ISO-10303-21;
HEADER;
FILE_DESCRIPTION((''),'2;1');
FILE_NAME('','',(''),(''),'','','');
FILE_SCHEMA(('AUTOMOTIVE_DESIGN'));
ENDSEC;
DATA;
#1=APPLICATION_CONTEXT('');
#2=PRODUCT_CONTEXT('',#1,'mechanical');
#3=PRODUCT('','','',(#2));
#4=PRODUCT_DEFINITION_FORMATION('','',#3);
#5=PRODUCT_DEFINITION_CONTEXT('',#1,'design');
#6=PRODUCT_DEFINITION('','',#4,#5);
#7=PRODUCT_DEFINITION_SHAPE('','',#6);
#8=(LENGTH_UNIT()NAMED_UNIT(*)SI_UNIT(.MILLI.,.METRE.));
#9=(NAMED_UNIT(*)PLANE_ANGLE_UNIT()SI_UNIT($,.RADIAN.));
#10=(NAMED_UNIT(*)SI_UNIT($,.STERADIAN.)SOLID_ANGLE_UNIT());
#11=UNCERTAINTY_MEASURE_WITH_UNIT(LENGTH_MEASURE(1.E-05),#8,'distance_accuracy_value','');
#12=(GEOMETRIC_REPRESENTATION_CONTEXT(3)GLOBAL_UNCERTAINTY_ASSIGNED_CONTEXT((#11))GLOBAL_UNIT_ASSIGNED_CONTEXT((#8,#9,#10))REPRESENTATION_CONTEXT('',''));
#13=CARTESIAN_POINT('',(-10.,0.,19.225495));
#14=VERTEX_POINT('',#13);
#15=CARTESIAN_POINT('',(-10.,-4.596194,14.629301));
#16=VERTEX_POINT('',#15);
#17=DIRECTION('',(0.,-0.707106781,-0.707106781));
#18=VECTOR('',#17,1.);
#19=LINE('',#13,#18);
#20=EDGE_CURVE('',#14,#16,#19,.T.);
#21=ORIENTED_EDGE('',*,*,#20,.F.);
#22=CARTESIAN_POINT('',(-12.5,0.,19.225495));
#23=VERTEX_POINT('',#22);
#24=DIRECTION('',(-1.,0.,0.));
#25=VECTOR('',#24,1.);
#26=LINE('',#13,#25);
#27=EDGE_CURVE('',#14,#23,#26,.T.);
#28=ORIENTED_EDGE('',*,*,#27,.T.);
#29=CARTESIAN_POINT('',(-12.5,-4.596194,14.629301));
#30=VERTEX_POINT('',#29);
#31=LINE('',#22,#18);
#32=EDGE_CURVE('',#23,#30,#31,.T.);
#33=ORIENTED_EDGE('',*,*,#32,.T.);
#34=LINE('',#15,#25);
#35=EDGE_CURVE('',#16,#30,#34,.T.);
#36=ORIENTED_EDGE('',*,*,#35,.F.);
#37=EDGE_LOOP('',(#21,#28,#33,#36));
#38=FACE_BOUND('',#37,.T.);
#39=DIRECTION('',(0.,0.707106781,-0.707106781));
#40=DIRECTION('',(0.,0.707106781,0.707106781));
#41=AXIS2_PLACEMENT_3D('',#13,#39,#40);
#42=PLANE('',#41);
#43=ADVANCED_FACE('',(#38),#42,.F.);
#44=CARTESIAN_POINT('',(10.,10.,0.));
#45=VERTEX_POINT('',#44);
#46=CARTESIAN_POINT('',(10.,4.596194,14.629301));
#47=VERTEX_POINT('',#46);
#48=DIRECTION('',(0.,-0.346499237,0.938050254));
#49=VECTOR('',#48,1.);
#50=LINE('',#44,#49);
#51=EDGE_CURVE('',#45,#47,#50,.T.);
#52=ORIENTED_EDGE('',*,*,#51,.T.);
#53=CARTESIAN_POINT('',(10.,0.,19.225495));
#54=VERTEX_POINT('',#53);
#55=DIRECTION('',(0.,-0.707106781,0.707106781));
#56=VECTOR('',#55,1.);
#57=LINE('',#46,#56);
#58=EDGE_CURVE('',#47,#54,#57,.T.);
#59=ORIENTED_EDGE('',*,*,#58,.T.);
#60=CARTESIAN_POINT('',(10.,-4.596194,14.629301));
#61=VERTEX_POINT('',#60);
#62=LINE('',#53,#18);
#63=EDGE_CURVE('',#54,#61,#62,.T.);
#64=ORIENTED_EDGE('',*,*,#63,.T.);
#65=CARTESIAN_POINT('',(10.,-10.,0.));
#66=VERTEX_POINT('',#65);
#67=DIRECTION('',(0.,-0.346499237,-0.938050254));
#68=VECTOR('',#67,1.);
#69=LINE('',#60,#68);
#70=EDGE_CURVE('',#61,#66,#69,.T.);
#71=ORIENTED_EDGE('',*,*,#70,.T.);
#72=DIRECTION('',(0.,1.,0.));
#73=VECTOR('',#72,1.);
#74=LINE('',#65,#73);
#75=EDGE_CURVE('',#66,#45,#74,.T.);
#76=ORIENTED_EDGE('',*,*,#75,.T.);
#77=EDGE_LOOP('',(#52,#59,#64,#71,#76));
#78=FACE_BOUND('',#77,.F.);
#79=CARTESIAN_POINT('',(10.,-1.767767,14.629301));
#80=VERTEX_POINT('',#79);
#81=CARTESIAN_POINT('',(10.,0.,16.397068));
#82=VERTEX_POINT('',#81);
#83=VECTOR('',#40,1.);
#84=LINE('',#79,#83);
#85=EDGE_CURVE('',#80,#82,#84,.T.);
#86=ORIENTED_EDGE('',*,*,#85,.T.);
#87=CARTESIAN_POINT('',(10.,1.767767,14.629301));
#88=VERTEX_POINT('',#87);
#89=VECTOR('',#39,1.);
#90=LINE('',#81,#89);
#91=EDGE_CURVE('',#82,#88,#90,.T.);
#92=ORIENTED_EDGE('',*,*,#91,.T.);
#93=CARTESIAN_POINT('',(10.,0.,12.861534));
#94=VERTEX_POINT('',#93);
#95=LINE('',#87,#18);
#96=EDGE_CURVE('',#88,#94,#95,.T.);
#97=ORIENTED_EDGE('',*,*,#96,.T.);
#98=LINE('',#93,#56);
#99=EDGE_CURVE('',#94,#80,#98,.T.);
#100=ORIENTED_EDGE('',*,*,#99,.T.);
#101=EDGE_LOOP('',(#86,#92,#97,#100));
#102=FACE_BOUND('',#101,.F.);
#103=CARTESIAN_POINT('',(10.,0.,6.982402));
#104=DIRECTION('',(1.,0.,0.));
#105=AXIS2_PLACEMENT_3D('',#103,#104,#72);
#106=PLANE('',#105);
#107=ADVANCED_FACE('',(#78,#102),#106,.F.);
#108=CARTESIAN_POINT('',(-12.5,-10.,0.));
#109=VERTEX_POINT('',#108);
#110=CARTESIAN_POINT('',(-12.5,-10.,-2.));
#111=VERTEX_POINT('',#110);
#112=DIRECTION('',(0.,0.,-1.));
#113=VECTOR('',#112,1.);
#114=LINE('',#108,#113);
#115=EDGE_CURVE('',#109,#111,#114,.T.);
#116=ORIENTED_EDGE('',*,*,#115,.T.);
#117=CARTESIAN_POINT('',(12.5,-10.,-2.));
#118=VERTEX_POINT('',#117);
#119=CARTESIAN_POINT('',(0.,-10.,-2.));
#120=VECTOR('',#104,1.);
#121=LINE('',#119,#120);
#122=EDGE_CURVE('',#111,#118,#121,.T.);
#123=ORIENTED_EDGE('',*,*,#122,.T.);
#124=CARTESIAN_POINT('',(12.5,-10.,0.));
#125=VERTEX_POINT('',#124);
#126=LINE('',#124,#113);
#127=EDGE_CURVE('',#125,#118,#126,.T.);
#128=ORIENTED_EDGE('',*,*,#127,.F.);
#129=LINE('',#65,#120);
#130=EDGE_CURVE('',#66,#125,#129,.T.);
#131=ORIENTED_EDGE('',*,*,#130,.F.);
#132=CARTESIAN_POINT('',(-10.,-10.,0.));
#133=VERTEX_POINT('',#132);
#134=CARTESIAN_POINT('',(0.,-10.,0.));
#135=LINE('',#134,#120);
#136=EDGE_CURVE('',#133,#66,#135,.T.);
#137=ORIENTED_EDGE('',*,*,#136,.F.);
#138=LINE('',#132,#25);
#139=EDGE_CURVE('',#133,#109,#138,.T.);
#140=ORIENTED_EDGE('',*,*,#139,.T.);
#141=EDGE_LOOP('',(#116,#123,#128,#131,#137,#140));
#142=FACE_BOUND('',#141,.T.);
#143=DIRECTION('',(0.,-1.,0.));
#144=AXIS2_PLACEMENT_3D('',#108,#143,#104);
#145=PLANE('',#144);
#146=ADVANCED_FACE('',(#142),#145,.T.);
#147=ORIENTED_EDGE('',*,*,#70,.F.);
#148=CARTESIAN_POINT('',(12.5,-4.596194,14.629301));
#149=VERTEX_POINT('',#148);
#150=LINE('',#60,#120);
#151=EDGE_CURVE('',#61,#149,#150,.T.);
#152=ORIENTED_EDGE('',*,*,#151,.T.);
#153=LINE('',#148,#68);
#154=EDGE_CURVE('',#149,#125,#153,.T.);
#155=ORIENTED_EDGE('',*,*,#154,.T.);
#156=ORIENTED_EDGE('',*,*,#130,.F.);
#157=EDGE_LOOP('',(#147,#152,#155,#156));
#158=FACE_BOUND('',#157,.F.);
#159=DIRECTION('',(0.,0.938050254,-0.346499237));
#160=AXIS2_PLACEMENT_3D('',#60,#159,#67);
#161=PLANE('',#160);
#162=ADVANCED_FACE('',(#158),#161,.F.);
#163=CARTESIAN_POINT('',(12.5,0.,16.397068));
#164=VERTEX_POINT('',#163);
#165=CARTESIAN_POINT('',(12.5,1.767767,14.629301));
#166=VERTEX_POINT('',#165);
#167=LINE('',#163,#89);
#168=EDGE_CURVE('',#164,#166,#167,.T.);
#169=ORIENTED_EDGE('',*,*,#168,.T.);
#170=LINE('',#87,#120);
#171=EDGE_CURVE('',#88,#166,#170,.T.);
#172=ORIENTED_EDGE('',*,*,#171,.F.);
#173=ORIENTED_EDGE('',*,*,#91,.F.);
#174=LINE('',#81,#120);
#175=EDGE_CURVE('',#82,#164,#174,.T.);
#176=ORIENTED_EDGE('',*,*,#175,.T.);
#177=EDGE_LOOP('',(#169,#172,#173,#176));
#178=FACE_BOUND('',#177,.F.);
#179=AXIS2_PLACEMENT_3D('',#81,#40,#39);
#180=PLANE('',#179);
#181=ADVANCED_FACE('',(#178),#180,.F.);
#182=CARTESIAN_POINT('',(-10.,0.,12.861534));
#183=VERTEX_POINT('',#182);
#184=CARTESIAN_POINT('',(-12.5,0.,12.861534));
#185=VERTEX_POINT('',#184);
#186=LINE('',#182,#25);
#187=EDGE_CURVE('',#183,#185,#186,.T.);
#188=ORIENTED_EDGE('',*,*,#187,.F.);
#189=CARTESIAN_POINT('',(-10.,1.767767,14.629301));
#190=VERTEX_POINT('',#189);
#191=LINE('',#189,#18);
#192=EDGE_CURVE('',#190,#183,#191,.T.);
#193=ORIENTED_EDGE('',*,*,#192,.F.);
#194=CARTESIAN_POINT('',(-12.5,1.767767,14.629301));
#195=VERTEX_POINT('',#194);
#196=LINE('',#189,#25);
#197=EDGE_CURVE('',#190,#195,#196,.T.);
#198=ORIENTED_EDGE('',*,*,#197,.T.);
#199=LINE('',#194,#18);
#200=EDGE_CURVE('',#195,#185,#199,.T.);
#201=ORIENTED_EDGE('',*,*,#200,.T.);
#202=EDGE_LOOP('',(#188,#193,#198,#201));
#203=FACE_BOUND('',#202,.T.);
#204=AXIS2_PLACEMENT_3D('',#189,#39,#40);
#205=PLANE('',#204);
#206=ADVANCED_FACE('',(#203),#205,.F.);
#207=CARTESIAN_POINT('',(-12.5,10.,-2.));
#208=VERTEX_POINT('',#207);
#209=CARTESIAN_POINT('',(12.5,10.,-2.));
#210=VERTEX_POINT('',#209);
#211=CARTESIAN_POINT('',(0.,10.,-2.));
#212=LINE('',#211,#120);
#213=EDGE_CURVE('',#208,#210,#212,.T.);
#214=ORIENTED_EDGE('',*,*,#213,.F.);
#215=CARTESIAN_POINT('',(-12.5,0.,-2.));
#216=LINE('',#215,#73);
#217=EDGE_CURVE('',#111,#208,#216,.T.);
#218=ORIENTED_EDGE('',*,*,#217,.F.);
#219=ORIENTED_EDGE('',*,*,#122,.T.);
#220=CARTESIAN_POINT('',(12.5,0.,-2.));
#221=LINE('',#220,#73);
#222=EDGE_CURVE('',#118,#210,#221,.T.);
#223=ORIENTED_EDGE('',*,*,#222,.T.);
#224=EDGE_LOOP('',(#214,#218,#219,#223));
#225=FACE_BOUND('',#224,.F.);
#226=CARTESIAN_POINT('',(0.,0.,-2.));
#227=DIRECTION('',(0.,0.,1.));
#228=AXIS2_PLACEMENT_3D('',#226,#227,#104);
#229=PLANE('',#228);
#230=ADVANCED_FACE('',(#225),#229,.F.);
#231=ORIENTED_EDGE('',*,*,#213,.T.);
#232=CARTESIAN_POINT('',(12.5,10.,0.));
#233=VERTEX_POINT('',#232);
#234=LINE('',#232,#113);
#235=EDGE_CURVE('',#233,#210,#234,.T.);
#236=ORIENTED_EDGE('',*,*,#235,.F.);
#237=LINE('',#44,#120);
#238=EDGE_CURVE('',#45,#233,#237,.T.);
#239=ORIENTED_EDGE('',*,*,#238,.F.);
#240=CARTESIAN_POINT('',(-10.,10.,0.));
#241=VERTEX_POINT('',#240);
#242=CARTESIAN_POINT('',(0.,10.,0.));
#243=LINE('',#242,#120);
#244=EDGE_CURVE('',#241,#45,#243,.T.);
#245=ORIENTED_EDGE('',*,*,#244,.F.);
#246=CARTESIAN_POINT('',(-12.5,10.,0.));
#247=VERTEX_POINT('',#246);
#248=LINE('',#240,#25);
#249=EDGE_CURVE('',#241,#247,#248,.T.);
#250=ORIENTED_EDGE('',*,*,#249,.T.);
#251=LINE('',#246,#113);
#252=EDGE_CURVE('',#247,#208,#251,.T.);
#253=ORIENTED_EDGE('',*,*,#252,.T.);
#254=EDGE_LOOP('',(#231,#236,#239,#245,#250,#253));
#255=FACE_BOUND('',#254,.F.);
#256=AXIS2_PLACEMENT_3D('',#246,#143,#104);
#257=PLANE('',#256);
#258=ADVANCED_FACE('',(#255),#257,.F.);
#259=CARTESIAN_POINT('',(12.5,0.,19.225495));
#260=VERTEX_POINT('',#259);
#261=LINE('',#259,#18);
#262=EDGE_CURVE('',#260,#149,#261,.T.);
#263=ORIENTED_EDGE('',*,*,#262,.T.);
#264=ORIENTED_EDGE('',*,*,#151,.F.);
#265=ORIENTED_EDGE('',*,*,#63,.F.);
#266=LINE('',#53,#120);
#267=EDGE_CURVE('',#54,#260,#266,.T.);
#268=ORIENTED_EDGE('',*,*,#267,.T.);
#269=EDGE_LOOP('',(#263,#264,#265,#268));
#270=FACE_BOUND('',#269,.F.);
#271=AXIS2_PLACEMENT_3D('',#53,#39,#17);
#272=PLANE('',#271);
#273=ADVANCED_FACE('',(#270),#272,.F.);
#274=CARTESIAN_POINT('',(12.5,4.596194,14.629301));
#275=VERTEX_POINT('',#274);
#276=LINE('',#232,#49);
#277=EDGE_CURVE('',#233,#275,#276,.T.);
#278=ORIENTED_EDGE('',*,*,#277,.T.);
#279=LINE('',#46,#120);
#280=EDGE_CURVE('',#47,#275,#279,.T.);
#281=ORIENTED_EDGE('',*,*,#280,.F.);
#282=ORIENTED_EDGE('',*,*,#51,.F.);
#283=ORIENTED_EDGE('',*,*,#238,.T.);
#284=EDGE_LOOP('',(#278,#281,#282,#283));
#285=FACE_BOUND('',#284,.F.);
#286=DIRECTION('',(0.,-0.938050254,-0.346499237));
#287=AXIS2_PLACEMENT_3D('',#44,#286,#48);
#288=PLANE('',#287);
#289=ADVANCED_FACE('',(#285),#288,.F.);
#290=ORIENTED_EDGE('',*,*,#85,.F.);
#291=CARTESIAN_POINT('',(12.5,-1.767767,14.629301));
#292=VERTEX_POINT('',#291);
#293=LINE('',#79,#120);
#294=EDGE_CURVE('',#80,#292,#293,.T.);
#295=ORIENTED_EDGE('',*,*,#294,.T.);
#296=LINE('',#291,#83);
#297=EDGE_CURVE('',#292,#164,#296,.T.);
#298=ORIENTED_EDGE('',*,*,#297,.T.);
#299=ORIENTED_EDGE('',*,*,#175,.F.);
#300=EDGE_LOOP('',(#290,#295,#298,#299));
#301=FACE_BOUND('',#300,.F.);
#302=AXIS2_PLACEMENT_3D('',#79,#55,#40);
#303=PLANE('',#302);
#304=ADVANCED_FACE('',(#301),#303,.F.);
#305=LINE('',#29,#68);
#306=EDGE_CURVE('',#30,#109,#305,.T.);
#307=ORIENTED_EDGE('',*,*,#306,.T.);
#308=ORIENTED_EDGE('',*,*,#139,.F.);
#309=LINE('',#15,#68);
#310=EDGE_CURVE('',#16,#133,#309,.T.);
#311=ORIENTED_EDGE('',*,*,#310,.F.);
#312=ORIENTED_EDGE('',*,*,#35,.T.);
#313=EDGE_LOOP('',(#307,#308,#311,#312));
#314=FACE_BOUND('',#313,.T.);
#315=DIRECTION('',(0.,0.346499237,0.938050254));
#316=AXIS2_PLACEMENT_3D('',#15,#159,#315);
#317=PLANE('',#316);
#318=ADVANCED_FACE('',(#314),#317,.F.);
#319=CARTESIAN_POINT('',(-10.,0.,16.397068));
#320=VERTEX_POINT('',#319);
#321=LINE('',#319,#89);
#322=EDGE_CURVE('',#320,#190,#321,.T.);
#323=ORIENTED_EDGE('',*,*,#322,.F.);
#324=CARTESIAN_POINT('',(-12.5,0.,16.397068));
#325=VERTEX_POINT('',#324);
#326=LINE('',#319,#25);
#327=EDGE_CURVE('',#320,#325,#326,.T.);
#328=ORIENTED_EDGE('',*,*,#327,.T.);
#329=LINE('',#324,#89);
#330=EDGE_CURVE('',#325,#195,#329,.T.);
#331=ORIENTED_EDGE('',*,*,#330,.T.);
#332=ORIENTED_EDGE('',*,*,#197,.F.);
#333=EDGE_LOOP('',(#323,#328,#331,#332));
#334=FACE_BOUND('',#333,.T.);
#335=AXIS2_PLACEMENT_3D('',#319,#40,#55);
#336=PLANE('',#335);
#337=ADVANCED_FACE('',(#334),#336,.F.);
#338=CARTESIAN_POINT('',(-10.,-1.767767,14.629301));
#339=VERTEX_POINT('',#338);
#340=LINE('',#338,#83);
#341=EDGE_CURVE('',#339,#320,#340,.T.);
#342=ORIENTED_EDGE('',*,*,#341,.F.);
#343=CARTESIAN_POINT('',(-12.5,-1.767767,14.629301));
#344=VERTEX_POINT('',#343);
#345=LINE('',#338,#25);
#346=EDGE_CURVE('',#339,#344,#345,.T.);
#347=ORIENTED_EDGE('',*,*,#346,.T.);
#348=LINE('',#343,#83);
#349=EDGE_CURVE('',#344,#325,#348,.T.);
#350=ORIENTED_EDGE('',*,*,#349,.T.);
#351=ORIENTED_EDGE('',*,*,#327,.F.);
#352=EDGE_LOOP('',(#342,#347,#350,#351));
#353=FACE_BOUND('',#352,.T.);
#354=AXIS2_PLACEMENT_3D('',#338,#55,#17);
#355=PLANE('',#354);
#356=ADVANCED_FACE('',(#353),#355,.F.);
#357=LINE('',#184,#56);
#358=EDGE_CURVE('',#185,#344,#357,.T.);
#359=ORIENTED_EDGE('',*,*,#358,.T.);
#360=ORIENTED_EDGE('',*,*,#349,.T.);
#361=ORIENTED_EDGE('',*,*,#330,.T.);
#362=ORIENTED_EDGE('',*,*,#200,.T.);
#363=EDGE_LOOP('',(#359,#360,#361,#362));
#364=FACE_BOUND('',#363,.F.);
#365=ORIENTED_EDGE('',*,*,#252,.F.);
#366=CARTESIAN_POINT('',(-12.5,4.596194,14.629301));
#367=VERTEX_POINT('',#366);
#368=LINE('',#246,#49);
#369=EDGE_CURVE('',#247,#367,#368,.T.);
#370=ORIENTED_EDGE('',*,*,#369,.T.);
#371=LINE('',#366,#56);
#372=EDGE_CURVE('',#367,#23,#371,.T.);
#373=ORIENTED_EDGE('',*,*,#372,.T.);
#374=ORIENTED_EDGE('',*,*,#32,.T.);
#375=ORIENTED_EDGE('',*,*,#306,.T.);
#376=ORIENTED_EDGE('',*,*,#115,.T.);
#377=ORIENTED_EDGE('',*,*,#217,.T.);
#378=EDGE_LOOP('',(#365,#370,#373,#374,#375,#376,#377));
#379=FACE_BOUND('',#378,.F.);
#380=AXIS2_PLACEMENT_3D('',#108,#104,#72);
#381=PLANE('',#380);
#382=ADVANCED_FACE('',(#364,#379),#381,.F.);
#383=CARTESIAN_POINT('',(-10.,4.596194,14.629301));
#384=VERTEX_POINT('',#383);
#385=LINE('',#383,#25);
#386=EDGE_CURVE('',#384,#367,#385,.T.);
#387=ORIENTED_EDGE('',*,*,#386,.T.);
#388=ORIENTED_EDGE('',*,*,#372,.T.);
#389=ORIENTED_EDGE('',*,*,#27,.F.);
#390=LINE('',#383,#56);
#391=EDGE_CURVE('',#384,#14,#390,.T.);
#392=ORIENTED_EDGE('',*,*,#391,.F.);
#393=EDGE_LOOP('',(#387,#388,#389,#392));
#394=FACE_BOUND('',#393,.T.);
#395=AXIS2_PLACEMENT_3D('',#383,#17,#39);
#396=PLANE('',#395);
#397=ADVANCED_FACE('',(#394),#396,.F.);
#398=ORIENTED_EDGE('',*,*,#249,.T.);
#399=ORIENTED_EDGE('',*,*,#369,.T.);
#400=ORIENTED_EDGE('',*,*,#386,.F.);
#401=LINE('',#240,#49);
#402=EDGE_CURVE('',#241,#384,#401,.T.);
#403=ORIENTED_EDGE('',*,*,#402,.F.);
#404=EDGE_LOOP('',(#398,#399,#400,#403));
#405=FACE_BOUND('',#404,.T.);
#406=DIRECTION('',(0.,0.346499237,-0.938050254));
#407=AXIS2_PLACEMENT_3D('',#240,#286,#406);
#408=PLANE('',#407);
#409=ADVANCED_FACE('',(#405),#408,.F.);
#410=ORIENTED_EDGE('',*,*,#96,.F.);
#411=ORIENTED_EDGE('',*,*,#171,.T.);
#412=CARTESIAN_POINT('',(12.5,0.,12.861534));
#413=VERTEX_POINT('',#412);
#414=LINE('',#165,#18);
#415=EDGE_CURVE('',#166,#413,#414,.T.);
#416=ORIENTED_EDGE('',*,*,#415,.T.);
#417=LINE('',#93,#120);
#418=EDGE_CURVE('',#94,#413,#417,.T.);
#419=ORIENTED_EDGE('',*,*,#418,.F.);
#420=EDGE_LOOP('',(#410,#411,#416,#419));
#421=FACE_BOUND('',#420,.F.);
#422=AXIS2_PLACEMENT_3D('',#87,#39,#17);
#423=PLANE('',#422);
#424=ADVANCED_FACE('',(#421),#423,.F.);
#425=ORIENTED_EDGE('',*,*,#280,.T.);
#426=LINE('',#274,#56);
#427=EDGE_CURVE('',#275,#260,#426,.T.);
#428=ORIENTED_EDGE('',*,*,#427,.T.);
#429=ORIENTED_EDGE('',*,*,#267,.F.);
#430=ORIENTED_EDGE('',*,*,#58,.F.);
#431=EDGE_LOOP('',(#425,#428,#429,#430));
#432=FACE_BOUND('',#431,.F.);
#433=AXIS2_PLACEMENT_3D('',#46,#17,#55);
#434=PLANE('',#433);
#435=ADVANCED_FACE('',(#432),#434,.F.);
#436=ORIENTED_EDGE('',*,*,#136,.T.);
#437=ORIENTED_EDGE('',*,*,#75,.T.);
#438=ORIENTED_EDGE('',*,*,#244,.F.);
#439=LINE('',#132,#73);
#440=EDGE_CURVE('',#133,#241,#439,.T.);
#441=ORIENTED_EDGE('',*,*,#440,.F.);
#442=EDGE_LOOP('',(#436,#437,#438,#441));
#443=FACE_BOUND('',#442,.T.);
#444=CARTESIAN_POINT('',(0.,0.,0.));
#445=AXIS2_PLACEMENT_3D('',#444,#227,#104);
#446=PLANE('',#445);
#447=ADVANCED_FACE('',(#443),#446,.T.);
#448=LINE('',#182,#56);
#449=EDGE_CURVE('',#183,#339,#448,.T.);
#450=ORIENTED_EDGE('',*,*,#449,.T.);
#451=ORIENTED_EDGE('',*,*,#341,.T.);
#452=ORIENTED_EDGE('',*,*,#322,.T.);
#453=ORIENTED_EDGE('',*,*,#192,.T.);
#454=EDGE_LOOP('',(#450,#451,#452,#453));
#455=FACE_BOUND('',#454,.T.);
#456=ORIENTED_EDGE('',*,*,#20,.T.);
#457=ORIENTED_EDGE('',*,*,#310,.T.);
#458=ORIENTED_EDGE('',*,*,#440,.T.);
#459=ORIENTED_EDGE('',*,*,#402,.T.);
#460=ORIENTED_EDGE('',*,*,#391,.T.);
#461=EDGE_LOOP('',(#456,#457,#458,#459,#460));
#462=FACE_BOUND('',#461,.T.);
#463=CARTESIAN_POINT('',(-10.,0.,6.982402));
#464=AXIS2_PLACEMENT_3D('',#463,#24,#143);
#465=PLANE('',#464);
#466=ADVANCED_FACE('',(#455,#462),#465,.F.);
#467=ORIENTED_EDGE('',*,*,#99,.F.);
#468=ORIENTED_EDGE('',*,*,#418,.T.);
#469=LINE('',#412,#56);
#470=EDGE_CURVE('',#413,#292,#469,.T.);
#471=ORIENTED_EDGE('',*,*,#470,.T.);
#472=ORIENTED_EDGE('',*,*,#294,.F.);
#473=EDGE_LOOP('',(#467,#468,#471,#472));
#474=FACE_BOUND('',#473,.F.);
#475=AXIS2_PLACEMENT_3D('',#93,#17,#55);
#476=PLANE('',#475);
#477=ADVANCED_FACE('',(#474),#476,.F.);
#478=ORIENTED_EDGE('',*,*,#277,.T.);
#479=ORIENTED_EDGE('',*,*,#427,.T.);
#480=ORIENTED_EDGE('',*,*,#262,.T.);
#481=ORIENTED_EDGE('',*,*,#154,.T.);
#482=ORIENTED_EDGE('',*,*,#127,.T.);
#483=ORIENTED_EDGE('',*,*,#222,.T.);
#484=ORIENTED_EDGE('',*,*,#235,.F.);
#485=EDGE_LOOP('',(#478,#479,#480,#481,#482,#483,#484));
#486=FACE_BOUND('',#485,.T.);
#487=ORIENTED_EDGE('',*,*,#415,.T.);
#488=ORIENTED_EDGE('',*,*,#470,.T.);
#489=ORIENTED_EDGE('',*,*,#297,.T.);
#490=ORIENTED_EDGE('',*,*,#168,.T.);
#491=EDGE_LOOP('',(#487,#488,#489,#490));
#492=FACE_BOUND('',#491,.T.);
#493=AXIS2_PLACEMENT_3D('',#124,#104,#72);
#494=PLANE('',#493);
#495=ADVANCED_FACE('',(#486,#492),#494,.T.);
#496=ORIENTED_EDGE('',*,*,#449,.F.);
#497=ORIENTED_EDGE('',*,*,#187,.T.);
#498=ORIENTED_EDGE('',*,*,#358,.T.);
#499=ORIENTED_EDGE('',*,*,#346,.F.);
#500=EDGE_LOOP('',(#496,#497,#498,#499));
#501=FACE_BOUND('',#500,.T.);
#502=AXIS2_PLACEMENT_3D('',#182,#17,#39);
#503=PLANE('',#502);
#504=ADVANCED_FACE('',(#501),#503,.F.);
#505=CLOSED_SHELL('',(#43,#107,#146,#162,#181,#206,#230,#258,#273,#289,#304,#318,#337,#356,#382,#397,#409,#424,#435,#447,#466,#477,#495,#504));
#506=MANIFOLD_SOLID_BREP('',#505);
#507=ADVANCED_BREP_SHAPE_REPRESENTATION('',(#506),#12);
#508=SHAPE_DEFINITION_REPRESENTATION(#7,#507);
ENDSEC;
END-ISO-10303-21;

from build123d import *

# Parameters (mm, degrees)
F2_DEPTH = 2.5
F3_W     = 25
F3_H     = 20
F4_DEPTH = 2


# Not quite as in the source:
# - a pattern or mirror of a feature is missing from the dataset's text; its kind, count and spacing are read off the source's solid


with BuildPart() as f2:
    # F1 (on offset) → F2 (new body)
    with BuildSketch(Plane.YZ.offset(10)):
        Polygon((-4.5961940777, 14.6293006837), (-10, 0), (10, 0), (4.5961940777, 14.6293006837), (0, 19.2254947614), align=None)
        Polygon((0, 16.3970676367), (1.767766953, 14.6293006837), (0, 12.8615337308), (-1.767766953, 14.6293006837), align=None, mode=Mode.SUBTRACT)
    extrude(amount=F2_DEPTH)


with BuildPart() as f2_copies_1:
    # F2_copies: instance of F2
    add(f2.part.mirror(Plane(origin=(0, 0, 0), x_dir=(0, 0, -1), z_dir=(-1, 0, 0))))


with BuildPart() as f2_1:
    add(f2.part)

    add(f2_copies_1.part)  # F4 merges F2_copies_1
    # F3 (on Top) → F4 (join)
    with BuildSketch(Plane.XY):
        Rectangle(F3_W, F3_H)
    extrude(amount=-F4_DEPTH)


solid = f2_1.part
